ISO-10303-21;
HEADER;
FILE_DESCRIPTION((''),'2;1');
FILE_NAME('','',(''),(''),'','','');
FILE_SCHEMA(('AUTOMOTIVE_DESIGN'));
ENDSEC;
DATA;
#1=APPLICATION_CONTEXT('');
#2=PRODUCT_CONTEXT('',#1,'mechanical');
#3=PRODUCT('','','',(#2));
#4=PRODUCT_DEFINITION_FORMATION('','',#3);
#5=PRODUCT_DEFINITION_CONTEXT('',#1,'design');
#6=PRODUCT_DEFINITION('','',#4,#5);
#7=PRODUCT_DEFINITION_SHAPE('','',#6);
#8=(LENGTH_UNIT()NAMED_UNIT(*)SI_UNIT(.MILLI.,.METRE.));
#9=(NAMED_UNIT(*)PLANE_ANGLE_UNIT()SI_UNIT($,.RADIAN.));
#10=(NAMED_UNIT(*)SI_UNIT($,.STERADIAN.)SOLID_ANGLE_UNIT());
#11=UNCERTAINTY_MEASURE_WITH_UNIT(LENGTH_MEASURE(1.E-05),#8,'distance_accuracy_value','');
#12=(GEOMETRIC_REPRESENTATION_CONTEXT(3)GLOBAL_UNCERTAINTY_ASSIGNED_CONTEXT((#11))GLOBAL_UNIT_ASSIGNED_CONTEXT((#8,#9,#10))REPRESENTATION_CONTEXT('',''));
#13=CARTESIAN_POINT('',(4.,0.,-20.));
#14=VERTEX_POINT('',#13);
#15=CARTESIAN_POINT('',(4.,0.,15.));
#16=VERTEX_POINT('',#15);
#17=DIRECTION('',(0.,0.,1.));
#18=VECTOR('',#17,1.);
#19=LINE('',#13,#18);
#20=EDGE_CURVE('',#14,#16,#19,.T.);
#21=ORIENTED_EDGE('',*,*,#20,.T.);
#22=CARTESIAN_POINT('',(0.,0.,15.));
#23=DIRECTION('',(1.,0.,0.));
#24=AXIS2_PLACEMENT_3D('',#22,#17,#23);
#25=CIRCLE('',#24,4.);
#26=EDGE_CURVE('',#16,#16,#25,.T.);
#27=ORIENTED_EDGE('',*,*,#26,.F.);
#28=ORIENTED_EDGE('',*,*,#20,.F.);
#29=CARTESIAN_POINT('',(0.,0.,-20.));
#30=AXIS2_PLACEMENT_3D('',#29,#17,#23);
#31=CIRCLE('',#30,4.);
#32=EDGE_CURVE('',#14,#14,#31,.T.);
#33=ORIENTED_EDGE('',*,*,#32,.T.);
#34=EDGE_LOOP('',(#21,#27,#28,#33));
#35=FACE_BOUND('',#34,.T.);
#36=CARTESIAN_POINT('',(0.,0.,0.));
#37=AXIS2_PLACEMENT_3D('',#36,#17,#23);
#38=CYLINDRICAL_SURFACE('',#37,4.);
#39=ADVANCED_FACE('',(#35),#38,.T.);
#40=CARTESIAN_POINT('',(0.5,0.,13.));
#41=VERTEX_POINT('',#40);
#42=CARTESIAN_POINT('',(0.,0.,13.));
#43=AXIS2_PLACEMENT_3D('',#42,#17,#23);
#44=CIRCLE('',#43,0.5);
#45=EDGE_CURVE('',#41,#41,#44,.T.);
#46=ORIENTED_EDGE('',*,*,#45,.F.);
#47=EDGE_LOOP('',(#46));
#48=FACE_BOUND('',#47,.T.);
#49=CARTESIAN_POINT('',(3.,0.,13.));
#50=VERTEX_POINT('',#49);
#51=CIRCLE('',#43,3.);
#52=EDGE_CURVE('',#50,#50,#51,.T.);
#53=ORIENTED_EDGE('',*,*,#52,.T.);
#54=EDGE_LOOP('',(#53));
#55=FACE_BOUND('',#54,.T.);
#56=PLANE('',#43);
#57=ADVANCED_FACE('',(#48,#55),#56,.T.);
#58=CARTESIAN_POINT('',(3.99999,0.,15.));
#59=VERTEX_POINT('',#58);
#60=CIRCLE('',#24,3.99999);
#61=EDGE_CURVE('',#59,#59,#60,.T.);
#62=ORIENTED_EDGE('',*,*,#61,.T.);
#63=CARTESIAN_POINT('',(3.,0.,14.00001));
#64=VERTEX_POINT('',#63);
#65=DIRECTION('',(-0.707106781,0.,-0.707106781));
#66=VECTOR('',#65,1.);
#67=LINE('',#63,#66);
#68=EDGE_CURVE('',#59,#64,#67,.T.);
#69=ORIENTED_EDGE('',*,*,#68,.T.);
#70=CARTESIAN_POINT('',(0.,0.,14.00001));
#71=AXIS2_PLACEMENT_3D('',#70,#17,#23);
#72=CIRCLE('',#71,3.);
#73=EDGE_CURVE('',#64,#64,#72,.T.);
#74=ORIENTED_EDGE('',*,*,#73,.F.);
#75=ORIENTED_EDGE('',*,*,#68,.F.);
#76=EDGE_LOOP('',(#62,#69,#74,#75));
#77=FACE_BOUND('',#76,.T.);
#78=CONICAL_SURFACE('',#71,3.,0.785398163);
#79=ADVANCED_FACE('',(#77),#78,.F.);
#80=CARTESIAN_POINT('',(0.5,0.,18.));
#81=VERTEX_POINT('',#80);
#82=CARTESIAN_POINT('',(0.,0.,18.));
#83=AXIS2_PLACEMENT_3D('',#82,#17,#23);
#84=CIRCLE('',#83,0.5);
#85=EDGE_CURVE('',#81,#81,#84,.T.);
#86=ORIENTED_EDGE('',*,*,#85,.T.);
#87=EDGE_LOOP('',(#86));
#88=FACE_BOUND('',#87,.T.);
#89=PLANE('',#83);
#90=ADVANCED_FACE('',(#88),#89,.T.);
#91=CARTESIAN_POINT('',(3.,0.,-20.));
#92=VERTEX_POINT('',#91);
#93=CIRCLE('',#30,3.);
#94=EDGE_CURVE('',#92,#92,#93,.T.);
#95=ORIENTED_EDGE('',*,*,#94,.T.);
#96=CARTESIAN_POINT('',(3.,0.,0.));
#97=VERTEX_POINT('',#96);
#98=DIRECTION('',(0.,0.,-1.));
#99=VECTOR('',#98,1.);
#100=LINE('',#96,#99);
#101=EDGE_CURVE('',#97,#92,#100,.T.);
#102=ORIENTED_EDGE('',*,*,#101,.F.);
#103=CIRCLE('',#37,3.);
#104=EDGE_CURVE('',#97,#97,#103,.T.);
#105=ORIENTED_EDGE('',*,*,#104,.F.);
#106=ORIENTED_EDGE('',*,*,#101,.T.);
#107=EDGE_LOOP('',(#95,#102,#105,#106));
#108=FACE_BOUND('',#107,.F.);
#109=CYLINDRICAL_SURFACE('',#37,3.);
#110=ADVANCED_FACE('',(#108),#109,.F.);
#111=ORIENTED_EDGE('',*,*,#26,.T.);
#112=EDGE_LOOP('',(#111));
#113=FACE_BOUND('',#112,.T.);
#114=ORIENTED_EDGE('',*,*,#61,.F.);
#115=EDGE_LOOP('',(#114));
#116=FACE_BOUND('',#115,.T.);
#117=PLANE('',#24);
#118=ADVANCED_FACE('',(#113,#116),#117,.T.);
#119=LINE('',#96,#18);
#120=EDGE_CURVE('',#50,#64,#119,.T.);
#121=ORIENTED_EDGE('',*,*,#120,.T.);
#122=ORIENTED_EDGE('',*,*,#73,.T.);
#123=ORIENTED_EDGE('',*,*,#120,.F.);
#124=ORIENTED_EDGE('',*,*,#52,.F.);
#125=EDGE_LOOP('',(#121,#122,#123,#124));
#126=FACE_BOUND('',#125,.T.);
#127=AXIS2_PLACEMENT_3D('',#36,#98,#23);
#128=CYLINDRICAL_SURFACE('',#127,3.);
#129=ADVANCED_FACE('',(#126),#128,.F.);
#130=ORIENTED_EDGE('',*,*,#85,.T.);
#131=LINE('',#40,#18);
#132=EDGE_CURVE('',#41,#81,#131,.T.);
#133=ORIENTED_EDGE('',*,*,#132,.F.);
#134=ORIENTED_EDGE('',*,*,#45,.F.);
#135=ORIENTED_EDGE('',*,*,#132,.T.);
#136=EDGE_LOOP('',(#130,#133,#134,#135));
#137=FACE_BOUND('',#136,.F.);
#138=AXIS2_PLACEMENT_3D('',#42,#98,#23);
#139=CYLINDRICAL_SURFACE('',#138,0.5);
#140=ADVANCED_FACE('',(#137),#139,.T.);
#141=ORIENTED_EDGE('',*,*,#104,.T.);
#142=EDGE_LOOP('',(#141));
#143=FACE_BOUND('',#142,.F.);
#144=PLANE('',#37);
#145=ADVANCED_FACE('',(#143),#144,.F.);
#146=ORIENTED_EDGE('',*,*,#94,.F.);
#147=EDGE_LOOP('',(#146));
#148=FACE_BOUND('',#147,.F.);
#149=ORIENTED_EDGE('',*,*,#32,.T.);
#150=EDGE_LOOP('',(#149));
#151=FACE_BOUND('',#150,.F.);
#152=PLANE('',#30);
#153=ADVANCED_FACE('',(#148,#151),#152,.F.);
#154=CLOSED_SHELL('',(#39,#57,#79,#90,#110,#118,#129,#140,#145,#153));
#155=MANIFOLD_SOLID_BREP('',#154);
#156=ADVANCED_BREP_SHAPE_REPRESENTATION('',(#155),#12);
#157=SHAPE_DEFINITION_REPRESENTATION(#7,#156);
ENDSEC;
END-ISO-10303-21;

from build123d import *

# Parameters (mm, degrees)
F0_R     = 4
F0_R_2   = 3
F1_DEPTH = 20
F2_DEPTH = 15
F3_DEPTH = 13
F4_SIZE  = 0.99999
F5_R     = 0.5
F6_DEPTH = 5


# Not quite as in the source:
# - a fillet or chamfer is up to 0.001 mm smaller than in the source, because OpenCascade refuses the exact size


with BuildPart() as f1:
    # F0 (on Top) → F1 (new body)
    with BuildSketch(Plane.XY):
        Circle(F0_R)
        Circle(F0_R_2, mode=Mode.SUBTRACT)
    extrude(amount=-F1_DEPTH)

    # F0 (on Top) → F2 (join)
    with BuildSketch(Plane.XY):
        Circle(F0_R)
        Circle(F0_R_2, mode=Mode.SUBTRACT)
    extrude(amount=F2_DEPTH)

    # F0 (on Top) → F3 (join)
    with BuildSketch(Plane.XY):
        Circle(F0_R_2)
    extrude(amount=F3_DEPTH)

    # F4 (size 1 in the source; OpenCascade refuses exactly that, so slightly less here)
    f4_edges = [f1.edges().sort_by_distance(p)[0] for p in [
        (-3, 0, 15),
    ]]
    chamfer(f4_edges, length=F4_SIZE)

    # F5 (on face) → F6 (join)
    with BuildSketch(Plane.XY.offset(13)):
        Circle(F5_R)
    extrude(amount=F6_DEPTH)


solid = f1.part
